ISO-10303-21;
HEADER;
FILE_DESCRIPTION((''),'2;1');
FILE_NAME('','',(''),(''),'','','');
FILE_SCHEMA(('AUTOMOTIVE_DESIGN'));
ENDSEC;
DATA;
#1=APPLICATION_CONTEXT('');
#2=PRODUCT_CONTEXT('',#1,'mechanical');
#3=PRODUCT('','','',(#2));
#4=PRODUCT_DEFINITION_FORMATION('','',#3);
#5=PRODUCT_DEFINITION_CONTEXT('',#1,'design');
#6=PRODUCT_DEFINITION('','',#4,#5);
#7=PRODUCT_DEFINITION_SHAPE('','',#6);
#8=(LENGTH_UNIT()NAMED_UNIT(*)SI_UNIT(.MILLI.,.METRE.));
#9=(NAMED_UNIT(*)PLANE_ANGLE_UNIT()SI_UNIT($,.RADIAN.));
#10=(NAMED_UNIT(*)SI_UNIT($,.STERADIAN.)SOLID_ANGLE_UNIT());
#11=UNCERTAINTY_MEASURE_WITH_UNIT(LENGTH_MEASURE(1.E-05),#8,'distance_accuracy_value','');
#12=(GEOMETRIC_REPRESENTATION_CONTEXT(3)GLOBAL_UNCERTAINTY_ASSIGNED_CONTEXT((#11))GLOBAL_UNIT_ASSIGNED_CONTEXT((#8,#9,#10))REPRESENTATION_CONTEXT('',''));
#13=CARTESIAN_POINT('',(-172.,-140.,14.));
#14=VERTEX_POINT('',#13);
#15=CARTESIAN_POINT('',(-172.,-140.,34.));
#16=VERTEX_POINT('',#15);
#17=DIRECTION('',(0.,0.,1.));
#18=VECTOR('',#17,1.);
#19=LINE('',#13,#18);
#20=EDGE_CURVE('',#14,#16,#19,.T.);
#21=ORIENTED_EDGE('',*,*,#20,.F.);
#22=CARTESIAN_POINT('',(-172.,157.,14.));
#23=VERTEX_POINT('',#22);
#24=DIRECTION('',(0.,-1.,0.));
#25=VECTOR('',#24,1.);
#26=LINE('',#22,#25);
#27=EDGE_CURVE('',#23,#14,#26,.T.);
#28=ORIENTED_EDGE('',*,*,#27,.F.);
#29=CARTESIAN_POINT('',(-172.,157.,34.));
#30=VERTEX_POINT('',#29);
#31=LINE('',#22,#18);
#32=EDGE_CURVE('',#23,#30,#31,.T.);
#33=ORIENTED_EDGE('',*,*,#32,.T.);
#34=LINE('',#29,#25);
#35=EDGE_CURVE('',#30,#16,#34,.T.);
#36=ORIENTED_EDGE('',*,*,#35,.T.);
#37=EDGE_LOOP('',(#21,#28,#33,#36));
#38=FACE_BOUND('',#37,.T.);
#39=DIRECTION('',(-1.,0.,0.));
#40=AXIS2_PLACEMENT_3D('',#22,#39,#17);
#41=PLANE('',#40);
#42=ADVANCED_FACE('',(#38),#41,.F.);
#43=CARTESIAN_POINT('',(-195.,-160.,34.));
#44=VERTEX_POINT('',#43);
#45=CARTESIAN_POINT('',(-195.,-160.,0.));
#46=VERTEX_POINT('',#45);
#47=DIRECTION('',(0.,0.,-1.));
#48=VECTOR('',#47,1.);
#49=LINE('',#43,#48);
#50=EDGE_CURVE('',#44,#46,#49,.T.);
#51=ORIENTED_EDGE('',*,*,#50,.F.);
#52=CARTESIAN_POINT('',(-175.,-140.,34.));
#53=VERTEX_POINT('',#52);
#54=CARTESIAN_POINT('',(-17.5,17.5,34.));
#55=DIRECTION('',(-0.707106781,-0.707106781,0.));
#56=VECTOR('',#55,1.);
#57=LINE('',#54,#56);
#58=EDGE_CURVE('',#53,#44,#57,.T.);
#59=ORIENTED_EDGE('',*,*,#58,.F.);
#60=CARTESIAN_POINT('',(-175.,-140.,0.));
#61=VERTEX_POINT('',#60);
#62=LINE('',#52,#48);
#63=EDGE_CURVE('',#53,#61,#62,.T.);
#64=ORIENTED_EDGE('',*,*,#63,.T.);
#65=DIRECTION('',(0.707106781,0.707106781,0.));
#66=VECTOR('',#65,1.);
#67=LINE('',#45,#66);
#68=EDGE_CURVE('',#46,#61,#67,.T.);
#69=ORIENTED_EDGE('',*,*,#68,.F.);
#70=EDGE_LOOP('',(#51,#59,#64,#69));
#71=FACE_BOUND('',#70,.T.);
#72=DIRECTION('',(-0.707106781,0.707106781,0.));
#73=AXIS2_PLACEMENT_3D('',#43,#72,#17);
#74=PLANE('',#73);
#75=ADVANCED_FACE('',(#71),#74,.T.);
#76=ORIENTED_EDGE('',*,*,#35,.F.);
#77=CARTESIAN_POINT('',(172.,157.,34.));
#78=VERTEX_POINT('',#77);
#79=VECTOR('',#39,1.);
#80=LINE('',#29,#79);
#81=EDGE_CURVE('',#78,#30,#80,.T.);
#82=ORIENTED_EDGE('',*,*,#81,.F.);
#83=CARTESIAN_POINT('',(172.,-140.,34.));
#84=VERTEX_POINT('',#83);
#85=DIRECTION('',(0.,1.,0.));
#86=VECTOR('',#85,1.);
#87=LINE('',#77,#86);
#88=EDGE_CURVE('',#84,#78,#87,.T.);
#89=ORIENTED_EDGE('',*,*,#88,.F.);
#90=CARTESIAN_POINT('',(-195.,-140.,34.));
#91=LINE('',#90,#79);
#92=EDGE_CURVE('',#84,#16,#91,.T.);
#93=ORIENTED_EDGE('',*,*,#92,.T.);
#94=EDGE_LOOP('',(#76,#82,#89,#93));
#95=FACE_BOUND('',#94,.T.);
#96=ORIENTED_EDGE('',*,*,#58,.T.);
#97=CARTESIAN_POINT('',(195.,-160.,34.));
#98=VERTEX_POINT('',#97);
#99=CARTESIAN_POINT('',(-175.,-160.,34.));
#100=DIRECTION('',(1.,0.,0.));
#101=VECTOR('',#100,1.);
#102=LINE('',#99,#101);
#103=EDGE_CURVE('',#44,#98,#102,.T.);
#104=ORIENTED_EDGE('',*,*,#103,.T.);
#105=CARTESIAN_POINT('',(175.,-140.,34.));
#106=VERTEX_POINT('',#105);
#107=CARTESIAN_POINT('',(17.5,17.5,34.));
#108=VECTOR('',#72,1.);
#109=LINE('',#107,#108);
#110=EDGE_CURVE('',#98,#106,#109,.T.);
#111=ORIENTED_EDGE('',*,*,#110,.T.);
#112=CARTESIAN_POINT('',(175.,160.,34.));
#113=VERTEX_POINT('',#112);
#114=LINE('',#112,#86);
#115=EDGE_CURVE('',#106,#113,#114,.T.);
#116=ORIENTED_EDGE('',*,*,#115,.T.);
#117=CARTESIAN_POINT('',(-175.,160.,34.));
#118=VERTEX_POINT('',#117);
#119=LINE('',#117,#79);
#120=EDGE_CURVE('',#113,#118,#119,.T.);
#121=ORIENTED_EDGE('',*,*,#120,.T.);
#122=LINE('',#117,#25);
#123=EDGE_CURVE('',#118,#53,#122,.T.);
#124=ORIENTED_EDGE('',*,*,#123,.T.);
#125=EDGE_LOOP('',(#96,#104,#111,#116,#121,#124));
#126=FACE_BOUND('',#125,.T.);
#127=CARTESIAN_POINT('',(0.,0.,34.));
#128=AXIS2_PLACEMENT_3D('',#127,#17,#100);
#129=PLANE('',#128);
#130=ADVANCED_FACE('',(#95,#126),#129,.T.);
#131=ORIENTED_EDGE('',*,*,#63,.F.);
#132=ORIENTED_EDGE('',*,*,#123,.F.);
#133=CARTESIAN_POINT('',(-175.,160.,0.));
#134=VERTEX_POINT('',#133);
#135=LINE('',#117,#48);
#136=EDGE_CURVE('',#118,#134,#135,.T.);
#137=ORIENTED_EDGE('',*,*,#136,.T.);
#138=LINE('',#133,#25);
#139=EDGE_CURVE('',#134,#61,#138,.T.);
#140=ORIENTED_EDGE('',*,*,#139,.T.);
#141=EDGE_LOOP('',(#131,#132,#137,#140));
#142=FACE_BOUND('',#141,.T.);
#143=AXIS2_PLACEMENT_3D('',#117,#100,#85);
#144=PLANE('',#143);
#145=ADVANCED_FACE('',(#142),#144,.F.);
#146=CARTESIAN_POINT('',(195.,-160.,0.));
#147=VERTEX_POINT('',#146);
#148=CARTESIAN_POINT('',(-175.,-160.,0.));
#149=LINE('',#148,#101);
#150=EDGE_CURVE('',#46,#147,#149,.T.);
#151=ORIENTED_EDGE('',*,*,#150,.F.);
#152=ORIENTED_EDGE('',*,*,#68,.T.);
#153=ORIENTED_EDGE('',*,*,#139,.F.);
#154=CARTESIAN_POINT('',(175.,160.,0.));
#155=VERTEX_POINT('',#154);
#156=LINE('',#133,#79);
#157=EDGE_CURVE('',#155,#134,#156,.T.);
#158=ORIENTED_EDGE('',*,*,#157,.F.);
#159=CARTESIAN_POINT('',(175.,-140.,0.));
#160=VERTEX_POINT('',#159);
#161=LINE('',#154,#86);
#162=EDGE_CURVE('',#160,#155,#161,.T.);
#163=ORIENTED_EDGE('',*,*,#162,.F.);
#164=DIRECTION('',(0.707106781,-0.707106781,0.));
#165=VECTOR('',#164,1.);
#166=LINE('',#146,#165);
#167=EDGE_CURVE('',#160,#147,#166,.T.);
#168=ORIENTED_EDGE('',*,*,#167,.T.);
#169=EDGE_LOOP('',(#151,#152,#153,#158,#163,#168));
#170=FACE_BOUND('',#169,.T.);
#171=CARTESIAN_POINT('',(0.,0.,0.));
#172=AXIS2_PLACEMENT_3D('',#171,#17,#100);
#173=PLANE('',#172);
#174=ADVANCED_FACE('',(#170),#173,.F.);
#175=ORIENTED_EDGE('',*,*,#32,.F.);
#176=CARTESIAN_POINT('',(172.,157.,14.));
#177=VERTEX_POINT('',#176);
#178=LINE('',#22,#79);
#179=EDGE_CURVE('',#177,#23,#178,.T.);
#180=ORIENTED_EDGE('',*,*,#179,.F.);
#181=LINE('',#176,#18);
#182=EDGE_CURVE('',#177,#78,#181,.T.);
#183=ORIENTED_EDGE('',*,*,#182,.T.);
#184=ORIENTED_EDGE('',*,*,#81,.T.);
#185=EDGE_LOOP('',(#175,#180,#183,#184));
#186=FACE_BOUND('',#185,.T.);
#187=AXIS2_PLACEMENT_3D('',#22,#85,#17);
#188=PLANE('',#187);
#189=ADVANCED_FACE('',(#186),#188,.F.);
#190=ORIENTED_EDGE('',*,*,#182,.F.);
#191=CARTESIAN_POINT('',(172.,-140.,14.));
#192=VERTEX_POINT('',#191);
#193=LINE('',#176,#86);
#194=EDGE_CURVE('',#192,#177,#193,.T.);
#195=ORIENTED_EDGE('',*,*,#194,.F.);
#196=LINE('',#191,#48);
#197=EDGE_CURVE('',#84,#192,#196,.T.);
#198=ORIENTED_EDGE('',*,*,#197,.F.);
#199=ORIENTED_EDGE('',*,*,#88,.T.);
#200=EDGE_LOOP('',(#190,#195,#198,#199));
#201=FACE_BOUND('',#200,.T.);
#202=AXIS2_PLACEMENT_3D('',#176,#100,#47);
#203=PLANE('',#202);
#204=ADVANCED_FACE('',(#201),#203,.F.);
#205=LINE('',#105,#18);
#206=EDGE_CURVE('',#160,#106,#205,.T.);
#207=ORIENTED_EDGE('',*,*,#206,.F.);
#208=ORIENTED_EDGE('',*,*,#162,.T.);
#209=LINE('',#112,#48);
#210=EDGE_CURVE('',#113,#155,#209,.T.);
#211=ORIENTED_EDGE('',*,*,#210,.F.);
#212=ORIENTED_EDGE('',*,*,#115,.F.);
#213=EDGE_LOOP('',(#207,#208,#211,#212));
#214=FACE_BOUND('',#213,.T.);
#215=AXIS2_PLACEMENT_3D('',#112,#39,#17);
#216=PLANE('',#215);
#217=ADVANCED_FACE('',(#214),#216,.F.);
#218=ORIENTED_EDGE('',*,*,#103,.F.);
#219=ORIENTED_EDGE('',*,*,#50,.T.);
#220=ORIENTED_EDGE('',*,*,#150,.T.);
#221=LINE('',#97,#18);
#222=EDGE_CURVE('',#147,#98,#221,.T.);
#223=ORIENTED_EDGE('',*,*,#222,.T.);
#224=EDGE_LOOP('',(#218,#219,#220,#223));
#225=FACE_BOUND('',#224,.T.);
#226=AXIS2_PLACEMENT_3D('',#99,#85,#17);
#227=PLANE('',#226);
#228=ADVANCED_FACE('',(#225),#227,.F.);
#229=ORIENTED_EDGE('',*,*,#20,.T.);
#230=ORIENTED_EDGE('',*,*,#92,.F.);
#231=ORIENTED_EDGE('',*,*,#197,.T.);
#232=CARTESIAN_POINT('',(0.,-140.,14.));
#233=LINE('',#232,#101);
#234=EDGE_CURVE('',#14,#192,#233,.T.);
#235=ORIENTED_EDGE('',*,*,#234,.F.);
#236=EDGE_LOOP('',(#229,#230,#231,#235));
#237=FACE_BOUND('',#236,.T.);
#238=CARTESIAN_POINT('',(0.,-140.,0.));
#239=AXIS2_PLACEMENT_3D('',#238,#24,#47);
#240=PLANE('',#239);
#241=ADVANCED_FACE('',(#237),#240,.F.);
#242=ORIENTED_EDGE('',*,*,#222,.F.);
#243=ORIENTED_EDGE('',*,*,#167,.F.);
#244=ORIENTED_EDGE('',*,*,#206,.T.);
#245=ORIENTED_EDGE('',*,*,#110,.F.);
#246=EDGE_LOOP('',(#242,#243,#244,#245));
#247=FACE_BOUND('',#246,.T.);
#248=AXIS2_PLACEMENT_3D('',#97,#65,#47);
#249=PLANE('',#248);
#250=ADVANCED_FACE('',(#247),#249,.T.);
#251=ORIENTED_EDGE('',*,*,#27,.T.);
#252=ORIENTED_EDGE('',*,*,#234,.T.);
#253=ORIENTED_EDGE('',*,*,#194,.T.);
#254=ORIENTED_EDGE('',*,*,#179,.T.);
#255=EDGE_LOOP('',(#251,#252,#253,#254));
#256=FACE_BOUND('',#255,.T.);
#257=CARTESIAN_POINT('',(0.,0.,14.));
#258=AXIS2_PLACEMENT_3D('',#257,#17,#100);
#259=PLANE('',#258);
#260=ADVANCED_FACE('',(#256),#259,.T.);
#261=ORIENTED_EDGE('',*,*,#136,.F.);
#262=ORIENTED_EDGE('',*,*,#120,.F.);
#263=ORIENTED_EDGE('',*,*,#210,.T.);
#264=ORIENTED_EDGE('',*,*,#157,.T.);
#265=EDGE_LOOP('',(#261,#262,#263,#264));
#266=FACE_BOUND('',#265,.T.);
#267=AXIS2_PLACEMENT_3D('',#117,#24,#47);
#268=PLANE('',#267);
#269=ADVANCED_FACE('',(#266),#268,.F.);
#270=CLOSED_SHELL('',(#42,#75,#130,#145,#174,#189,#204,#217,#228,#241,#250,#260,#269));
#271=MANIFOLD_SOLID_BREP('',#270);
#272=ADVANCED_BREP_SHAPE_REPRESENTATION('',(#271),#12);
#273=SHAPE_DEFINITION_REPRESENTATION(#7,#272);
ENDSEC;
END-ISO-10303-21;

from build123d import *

# Parameters (mm, degrees)
SKETCH_1_W          = 350
SKETCH_1_H          = 320
EXTRUDE_1_DEPTH     = 34
SKETCH_2_W          = 344
SKETCH_2_H          = 314
CUT_EXTRUDE_1_DEPTH = 20
SKETCH_3_W          = 390
SKETCH_3_H          = 34
EXTRUDE_2_DEPTH     = 20
CHAMFER_1_SIZE      = 20


with BuildPart() as part:
    # 草图1 → 凸台-拉伸1 (new body)
    with BuildSketch(Plane.XY):
        Rectangle(SKETCH_1_W, SKETCH_1_H)
    extrude(amount=EXTRUDE_1_DEPTH)

    # 草图2 → 切除-拉伸1 (cut)
    with BuildSketch(Plane.XY.offset(34)):
        Rectangle(SKETCH_2_W, SKETCH_2_H)
    extrude(amount=-CUT_EXTRUDE_1_DEPTH, mode=Mode.SUBTRACT)

    # 草图3 → 凸台-拉伸2 (add)
    with BuildSketch(Plane.XZ.offset(160)):
        with Locations((0, 17)):
            Rectangle(SKETCH_3_W, SKETCH_3_H)
    extrude(amount=-EXTRUDE_2_DEPTH)

    # 倒角1
    chamfer_1_edges = [part.edges().sort_by_distance(p)[0] for p in [
        (195, -140, 17),
        (-195, -140, 17),
    ]]
    chamfer(chamfer_1_edges, length=CHAMFER_1_SIZE - 0.0001)  # a hair under: the kernel refuses the full size


solid = part.part
